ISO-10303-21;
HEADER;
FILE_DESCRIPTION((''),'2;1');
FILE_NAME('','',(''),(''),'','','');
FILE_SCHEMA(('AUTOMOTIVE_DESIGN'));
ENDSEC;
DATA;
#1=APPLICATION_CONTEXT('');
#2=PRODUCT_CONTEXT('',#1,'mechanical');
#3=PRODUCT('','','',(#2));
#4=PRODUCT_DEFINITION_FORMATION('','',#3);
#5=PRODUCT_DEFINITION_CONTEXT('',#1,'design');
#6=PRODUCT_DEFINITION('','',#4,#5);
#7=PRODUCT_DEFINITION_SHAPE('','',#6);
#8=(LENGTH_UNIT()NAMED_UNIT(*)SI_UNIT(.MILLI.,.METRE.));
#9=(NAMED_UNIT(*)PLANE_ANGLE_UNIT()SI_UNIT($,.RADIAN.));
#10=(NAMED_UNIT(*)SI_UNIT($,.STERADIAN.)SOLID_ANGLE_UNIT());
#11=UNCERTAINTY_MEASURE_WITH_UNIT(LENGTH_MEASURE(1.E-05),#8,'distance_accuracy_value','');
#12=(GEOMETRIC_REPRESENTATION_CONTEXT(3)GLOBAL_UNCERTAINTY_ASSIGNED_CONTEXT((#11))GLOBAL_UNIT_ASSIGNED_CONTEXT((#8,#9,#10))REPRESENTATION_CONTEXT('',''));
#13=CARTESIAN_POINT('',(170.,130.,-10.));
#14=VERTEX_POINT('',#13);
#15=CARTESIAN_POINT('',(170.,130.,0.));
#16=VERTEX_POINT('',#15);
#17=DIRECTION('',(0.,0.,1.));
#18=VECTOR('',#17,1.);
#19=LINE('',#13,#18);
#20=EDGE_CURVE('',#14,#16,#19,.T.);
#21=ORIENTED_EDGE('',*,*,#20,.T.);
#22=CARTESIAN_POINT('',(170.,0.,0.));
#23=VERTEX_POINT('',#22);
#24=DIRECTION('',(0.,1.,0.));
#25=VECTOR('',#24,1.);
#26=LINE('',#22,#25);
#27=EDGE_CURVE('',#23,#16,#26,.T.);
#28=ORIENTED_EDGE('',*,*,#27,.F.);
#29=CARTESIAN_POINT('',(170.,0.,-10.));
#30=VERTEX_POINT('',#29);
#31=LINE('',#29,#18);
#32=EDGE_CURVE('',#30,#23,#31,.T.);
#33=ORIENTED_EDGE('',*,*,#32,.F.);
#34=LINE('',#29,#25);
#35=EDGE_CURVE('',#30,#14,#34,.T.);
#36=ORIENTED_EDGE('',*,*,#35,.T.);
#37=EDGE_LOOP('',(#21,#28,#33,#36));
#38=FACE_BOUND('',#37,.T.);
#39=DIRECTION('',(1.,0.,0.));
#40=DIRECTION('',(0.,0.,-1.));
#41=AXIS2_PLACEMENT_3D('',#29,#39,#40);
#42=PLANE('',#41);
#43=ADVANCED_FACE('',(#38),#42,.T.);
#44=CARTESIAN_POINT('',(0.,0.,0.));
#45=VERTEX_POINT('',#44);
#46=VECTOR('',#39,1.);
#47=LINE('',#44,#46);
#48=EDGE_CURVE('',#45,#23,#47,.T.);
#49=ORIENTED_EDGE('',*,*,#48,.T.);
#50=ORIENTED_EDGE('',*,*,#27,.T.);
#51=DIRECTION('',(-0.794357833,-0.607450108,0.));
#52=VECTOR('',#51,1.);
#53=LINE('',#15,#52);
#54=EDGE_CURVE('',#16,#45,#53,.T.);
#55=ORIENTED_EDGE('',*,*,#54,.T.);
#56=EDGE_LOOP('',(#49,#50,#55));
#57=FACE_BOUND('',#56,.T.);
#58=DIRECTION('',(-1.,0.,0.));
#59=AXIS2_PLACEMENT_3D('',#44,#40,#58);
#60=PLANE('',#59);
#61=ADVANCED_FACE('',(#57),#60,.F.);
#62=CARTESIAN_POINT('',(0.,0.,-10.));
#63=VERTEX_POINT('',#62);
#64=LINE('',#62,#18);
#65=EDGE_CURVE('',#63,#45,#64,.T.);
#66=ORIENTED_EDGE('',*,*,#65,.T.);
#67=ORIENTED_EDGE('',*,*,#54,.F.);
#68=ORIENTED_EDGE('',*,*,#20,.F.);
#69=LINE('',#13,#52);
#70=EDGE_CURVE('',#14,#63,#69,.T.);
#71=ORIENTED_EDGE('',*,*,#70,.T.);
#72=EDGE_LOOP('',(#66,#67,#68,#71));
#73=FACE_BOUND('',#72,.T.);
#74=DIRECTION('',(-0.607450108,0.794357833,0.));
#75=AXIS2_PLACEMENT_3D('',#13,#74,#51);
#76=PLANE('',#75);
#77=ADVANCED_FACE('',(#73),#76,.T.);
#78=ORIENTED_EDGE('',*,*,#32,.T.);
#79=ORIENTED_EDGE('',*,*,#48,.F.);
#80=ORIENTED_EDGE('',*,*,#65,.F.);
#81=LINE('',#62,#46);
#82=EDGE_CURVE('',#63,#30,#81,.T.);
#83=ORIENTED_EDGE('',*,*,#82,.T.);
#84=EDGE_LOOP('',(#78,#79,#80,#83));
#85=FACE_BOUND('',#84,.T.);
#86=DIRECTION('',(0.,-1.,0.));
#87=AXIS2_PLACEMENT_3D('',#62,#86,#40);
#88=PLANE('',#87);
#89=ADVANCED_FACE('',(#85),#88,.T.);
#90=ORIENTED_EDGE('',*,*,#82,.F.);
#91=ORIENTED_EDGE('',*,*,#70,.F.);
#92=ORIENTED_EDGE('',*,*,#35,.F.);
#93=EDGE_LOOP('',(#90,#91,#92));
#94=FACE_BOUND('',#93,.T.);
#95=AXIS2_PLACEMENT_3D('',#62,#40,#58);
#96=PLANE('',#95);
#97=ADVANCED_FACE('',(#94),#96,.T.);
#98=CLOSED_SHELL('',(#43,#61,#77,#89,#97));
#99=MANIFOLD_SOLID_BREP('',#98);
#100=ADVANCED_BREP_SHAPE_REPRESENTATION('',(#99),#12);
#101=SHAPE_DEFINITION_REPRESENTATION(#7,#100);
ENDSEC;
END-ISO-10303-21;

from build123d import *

# Parameters (mm, degrees)
TABAN_FLAN_1_DEPTH = 10


# Sheet-metal steps are written as plain solids
with BuildPart() as part:
    # Çizim1 → Taban-Flanş1 (new body)
    with BuildSketch(Plane.XY):
        Polygon((0, 0), (170, 0), (170, 130), align=None)
    extrude(amount=-TABAN_FLAN_1_DEPTH)


solid = part.part
